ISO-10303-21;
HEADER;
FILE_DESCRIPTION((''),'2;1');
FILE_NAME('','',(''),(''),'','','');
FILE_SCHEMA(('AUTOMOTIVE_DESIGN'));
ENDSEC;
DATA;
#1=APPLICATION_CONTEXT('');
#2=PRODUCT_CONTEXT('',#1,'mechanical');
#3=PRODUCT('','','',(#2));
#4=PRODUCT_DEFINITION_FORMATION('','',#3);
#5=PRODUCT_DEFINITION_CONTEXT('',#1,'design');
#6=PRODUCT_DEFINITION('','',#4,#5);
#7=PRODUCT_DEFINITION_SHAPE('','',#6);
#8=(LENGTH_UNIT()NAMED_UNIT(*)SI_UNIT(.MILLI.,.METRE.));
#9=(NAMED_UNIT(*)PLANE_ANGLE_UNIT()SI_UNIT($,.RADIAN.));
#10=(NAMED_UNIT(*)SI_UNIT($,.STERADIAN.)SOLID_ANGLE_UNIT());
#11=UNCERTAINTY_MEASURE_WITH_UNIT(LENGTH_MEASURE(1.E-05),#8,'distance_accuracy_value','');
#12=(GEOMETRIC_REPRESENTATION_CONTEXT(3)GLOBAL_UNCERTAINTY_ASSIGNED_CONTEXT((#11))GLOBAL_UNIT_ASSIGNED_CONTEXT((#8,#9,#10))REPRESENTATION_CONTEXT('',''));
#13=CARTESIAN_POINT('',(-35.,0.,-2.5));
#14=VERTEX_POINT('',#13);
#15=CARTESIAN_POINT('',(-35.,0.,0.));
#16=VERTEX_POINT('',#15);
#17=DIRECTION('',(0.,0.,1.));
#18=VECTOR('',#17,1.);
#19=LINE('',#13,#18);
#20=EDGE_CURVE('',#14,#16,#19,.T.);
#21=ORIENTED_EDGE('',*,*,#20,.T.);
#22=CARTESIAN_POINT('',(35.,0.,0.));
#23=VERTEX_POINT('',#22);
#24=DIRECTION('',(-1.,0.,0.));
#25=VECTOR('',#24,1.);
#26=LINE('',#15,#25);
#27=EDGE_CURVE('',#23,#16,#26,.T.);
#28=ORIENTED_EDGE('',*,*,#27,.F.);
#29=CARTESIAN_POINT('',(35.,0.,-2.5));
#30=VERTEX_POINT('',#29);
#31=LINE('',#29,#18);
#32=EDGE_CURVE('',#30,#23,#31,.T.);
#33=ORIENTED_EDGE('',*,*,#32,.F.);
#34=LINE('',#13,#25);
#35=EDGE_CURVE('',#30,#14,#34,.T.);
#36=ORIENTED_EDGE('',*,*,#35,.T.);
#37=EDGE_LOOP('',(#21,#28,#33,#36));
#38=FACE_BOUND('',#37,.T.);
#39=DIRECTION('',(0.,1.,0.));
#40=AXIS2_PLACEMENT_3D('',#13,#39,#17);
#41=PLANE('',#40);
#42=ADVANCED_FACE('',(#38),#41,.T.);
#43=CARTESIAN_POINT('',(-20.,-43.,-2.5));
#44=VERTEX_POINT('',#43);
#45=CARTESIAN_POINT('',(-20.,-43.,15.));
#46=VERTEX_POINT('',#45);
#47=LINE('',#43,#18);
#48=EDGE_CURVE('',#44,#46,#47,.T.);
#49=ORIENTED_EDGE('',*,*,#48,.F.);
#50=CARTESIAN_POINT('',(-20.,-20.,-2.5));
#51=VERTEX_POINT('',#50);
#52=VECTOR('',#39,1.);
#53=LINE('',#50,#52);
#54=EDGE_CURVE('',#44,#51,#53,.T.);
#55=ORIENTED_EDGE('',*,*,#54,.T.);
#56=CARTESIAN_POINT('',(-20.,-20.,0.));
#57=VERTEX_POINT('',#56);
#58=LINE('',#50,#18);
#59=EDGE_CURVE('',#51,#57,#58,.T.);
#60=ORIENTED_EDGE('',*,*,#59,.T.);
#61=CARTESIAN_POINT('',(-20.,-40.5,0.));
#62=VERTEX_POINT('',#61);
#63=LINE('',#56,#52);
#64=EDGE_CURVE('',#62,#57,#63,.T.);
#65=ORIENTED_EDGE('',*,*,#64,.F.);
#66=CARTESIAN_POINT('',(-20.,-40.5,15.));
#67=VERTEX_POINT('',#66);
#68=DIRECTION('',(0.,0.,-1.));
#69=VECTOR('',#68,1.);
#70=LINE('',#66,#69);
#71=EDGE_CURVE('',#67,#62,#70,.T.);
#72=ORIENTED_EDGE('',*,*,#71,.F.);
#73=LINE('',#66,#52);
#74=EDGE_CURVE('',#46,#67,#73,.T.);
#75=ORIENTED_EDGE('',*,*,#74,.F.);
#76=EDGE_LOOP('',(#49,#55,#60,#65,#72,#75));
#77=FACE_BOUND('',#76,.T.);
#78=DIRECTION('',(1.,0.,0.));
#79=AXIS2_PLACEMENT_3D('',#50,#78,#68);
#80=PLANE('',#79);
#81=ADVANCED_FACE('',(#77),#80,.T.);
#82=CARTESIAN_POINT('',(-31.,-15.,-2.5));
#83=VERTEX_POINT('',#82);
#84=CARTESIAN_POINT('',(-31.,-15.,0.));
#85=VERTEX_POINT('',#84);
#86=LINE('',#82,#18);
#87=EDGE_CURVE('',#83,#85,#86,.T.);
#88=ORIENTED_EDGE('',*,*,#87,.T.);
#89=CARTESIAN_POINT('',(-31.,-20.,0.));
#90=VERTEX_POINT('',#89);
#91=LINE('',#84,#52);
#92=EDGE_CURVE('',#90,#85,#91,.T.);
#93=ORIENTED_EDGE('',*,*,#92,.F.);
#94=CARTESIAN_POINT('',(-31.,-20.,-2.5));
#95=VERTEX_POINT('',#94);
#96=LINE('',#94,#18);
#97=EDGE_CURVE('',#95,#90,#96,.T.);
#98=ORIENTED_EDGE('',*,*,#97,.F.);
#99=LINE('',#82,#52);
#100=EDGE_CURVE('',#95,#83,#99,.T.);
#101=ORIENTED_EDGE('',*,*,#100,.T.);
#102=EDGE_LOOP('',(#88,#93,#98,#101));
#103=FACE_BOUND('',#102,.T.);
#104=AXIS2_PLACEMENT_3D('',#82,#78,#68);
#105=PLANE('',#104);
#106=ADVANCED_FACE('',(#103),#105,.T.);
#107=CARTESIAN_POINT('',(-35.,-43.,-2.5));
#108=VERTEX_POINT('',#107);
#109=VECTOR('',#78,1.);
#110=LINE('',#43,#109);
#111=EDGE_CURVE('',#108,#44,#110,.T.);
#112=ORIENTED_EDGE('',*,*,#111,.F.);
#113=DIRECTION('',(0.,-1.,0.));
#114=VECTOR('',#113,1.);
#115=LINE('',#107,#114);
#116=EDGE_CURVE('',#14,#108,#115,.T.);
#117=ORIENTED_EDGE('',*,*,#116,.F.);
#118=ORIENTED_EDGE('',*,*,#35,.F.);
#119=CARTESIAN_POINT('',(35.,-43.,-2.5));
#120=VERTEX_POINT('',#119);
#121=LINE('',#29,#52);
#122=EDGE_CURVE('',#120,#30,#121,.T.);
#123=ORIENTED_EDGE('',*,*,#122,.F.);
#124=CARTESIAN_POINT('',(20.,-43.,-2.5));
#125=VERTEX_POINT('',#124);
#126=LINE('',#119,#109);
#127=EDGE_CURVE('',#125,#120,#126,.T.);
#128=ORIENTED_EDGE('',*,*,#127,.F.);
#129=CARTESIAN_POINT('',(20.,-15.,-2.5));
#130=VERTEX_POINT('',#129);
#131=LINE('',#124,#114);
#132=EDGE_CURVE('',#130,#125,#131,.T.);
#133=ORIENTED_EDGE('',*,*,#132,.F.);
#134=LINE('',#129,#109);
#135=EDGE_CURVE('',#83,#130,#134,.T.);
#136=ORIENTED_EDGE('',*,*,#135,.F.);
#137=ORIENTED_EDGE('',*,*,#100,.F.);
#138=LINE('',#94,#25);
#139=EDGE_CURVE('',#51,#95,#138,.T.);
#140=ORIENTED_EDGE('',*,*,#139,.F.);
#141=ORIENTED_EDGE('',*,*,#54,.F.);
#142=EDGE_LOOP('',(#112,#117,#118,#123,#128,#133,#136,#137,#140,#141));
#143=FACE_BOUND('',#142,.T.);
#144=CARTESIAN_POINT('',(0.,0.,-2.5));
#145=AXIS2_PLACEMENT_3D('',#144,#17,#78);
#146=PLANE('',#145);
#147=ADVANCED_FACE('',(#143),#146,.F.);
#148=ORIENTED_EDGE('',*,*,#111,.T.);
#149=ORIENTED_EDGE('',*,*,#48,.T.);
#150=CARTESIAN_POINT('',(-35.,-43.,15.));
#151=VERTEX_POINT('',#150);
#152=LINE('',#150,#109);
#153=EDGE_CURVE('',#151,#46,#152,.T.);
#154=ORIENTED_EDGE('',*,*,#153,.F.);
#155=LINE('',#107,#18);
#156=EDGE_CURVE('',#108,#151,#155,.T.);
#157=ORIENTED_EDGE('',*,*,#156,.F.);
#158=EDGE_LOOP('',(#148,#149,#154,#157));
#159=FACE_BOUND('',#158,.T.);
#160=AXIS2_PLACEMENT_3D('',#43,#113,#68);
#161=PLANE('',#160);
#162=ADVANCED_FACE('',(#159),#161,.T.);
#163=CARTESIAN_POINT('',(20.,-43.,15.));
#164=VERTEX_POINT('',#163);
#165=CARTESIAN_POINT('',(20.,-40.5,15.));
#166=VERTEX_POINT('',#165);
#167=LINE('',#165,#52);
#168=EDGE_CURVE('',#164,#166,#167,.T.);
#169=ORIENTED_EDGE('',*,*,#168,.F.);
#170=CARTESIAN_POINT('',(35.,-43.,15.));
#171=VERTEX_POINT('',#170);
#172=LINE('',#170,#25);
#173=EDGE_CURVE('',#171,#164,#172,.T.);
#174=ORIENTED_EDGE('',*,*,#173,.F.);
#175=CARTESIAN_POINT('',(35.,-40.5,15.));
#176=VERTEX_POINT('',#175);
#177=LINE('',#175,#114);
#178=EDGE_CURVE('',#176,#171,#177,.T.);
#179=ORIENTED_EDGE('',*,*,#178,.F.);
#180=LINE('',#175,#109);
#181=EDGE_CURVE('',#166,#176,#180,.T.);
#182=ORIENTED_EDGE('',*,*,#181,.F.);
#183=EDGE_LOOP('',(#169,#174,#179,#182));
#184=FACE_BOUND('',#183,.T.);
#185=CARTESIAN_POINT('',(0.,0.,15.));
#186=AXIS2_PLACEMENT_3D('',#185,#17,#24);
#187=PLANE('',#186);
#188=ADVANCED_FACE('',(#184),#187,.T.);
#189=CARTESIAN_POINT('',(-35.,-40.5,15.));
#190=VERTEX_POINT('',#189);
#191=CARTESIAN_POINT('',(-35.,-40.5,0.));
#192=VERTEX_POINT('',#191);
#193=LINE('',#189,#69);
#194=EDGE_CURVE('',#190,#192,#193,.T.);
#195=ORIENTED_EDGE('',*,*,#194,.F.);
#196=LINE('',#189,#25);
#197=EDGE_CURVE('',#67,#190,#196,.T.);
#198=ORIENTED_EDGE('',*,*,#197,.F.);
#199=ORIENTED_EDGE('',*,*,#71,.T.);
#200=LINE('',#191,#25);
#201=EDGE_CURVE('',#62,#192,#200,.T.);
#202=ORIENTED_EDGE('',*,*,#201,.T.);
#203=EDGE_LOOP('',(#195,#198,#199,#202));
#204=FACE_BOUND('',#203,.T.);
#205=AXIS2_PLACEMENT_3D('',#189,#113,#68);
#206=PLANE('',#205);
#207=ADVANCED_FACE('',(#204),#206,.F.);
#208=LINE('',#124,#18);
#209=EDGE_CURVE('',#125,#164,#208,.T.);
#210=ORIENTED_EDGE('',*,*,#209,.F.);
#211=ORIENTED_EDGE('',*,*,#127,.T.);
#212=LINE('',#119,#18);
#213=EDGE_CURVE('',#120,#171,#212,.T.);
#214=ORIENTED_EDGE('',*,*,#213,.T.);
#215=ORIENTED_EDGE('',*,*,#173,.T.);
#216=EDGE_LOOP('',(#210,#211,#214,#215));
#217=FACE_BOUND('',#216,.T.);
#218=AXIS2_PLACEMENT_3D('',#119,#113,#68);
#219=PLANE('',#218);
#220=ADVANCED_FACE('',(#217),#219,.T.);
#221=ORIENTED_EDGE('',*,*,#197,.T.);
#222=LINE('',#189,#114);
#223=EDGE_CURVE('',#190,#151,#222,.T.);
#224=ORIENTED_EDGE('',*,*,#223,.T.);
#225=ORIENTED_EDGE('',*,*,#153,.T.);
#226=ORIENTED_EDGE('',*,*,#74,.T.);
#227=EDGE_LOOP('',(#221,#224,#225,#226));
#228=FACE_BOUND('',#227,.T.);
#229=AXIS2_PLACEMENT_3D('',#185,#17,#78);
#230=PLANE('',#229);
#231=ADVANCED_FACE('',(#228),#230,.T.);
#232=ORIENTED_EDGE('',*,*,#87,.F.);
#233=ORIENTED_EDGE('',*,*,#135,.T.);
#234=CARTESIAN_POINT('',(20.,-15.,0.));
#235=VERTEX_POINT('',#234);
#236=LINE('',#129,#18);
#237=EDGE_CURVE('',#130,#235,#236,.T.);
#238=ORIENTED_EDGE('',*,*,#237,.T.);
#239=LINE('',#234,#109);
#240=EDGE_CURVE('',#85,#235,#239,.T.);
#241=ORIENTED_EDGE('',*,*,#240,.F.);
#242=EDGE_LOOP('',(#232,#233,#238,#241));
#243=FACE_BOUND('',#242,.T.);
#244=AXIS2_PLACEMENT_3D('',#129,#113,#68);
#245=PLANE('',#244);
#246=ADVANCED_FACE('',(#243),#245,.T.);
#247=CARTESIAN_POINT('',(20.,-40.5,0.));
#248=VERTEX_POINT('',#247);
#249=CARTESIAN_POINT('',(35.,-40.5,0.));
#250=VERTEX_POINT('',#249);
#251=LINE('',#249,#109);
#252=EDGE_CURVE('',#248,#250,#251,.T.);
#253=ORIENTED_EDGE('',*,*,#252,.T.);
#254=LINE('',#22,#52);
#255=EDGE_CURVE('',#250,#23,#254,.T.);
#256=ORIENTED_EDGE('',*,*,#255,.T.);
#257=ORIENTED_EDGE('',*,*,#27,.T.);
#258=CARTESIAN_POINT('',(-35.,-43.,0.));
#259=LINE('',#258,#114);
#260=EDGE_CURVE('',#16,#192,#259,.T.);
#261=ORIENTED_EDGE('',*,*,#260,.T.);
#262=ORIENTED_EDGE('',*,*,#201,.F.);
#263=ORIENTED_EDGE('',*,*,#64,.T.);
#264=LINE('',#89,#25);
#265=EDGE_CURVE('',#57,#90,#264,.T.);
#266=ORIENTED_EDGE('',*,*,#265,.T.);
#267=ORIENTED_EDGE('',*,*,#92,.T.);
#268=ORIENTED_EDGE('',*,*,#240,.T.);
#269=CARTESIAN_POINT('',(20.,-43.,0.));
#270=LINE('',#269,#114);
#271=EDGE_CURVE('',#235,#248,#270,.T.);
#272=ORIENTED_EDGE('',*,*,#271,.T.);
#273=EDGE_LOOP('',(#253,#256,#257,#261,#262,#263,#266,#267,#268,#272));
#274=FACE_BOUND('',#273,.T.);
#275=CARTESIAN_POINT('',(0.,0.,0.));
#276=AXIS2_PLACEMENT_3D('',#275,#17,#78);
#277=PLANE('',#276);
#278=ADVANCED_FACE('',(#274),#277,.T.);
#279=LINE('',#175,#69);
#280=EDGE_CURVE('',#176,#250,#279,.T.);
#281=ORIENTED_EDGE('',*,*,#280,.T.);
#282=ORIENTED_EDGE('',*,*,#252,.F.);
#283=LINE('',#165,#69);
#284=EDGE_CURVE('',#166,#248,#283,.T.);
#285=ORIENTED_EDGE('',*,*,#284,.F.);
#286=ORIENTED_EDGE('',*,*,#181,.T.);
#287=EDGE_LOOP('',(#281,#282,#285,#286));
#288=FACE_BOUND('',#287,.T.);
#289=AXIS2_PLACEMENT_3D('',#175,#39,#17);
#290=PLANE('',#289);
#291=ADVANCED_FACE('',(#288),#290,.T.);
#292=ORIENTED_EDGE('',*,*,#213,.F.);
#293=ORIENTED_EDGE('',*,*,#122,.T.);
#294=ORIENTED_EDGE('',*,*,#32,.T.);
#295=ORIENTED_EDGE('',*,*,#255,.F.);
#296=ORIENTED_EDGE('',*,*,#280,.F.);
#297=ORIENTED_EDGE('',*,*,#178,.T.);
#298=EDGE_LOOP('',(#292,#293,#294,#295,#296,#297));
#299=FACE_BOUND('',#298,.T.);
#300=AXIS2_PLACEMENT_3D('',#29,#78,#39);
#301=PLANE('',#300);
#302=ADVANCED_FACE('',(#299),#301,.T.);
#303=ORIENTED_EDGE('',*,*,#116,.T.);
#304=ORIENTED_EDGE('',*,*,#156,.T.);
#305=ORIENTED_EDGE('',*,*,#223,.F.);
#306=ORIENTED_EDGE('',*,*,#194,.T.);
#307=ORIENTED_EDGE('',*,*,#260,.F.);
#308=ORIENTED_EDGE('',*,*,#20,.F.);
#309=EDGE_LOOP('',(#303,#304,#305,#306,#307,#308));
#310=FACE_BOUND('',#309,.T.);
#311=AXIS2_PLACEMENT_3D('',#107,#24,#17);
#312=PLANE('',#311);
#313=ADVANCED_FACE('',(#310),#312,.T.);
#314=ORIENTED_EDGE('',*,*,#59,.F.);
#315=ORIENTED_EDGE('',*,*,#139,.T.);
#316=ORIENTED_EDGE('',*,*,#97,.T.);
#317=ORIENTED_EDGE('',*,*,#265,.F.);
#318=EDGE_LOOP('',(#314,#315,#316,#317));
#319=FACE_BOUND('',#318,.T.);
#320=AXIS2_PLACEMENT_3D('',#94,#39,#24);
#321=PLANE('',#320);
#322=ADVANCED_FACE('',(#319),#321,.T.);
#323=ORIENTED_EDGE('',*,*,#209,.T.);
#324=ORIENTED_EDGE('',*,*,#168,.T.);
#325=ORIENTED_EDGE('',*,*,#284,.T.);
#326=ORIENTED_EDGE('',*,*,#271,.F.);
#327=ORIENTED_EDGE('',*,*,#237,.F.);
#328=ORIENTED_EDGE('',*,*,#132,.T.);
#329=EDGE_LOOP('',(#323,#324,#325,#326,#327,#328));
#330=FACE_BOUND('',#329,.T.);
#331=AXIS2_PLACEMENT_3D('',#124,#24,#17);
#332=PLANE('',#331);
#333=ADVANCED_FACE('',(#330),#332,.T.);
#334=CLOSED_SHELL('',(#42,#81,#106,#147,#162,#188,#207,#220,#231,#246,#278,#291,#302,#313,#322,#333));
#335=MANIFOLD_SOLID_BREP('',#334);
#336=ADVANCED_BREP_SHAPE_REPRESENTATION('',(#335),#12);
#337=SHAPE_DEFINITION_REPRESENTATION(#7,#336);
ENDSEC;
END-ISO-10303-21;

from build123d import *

# Parameters (mm, degrees)
BASE_FLANGE1_DEPTH  = 2.5
SKETCH6_W           = 15
SKETCH6_H           = 2.5
BOSS_EXTRUDE1_DEPTH = 15


# Sheet-metal steps are written as plain solids
with BuildPart() as part:
    # Sketch1 → Base-Flange1 (new body)
    with BuildSketch(Plane.XY):
        Polygon((-35, 0), (35, 0), (35, -43), (20, -43), (20, -15), (-31, -15), (-31, -20), (-20, -20), (-20, -43), (-35, -43), align=None)
    extrude(amount=-BASE_FLANGE1_DEPTH)

    # Sketch6 → Boss-Extrude1 (add)
    with BuildSketch(Plane.XY):
        with Locations((-27.5, -41.75)):
            Rectangle(SKETCH6_W, SKETCH6_H)
    boss_extrude1 = extrude(amount=BOSS_EXTRUDE1_DEPTH)

    # Mirror1: Boss-Extrude1 across plane
    add(boss_extrude1.mirror(Plane(origin=(0, 0, 0), x_dir=(0, 0, 1), z_dir=(1, 0, 0))))


solid = part.part
